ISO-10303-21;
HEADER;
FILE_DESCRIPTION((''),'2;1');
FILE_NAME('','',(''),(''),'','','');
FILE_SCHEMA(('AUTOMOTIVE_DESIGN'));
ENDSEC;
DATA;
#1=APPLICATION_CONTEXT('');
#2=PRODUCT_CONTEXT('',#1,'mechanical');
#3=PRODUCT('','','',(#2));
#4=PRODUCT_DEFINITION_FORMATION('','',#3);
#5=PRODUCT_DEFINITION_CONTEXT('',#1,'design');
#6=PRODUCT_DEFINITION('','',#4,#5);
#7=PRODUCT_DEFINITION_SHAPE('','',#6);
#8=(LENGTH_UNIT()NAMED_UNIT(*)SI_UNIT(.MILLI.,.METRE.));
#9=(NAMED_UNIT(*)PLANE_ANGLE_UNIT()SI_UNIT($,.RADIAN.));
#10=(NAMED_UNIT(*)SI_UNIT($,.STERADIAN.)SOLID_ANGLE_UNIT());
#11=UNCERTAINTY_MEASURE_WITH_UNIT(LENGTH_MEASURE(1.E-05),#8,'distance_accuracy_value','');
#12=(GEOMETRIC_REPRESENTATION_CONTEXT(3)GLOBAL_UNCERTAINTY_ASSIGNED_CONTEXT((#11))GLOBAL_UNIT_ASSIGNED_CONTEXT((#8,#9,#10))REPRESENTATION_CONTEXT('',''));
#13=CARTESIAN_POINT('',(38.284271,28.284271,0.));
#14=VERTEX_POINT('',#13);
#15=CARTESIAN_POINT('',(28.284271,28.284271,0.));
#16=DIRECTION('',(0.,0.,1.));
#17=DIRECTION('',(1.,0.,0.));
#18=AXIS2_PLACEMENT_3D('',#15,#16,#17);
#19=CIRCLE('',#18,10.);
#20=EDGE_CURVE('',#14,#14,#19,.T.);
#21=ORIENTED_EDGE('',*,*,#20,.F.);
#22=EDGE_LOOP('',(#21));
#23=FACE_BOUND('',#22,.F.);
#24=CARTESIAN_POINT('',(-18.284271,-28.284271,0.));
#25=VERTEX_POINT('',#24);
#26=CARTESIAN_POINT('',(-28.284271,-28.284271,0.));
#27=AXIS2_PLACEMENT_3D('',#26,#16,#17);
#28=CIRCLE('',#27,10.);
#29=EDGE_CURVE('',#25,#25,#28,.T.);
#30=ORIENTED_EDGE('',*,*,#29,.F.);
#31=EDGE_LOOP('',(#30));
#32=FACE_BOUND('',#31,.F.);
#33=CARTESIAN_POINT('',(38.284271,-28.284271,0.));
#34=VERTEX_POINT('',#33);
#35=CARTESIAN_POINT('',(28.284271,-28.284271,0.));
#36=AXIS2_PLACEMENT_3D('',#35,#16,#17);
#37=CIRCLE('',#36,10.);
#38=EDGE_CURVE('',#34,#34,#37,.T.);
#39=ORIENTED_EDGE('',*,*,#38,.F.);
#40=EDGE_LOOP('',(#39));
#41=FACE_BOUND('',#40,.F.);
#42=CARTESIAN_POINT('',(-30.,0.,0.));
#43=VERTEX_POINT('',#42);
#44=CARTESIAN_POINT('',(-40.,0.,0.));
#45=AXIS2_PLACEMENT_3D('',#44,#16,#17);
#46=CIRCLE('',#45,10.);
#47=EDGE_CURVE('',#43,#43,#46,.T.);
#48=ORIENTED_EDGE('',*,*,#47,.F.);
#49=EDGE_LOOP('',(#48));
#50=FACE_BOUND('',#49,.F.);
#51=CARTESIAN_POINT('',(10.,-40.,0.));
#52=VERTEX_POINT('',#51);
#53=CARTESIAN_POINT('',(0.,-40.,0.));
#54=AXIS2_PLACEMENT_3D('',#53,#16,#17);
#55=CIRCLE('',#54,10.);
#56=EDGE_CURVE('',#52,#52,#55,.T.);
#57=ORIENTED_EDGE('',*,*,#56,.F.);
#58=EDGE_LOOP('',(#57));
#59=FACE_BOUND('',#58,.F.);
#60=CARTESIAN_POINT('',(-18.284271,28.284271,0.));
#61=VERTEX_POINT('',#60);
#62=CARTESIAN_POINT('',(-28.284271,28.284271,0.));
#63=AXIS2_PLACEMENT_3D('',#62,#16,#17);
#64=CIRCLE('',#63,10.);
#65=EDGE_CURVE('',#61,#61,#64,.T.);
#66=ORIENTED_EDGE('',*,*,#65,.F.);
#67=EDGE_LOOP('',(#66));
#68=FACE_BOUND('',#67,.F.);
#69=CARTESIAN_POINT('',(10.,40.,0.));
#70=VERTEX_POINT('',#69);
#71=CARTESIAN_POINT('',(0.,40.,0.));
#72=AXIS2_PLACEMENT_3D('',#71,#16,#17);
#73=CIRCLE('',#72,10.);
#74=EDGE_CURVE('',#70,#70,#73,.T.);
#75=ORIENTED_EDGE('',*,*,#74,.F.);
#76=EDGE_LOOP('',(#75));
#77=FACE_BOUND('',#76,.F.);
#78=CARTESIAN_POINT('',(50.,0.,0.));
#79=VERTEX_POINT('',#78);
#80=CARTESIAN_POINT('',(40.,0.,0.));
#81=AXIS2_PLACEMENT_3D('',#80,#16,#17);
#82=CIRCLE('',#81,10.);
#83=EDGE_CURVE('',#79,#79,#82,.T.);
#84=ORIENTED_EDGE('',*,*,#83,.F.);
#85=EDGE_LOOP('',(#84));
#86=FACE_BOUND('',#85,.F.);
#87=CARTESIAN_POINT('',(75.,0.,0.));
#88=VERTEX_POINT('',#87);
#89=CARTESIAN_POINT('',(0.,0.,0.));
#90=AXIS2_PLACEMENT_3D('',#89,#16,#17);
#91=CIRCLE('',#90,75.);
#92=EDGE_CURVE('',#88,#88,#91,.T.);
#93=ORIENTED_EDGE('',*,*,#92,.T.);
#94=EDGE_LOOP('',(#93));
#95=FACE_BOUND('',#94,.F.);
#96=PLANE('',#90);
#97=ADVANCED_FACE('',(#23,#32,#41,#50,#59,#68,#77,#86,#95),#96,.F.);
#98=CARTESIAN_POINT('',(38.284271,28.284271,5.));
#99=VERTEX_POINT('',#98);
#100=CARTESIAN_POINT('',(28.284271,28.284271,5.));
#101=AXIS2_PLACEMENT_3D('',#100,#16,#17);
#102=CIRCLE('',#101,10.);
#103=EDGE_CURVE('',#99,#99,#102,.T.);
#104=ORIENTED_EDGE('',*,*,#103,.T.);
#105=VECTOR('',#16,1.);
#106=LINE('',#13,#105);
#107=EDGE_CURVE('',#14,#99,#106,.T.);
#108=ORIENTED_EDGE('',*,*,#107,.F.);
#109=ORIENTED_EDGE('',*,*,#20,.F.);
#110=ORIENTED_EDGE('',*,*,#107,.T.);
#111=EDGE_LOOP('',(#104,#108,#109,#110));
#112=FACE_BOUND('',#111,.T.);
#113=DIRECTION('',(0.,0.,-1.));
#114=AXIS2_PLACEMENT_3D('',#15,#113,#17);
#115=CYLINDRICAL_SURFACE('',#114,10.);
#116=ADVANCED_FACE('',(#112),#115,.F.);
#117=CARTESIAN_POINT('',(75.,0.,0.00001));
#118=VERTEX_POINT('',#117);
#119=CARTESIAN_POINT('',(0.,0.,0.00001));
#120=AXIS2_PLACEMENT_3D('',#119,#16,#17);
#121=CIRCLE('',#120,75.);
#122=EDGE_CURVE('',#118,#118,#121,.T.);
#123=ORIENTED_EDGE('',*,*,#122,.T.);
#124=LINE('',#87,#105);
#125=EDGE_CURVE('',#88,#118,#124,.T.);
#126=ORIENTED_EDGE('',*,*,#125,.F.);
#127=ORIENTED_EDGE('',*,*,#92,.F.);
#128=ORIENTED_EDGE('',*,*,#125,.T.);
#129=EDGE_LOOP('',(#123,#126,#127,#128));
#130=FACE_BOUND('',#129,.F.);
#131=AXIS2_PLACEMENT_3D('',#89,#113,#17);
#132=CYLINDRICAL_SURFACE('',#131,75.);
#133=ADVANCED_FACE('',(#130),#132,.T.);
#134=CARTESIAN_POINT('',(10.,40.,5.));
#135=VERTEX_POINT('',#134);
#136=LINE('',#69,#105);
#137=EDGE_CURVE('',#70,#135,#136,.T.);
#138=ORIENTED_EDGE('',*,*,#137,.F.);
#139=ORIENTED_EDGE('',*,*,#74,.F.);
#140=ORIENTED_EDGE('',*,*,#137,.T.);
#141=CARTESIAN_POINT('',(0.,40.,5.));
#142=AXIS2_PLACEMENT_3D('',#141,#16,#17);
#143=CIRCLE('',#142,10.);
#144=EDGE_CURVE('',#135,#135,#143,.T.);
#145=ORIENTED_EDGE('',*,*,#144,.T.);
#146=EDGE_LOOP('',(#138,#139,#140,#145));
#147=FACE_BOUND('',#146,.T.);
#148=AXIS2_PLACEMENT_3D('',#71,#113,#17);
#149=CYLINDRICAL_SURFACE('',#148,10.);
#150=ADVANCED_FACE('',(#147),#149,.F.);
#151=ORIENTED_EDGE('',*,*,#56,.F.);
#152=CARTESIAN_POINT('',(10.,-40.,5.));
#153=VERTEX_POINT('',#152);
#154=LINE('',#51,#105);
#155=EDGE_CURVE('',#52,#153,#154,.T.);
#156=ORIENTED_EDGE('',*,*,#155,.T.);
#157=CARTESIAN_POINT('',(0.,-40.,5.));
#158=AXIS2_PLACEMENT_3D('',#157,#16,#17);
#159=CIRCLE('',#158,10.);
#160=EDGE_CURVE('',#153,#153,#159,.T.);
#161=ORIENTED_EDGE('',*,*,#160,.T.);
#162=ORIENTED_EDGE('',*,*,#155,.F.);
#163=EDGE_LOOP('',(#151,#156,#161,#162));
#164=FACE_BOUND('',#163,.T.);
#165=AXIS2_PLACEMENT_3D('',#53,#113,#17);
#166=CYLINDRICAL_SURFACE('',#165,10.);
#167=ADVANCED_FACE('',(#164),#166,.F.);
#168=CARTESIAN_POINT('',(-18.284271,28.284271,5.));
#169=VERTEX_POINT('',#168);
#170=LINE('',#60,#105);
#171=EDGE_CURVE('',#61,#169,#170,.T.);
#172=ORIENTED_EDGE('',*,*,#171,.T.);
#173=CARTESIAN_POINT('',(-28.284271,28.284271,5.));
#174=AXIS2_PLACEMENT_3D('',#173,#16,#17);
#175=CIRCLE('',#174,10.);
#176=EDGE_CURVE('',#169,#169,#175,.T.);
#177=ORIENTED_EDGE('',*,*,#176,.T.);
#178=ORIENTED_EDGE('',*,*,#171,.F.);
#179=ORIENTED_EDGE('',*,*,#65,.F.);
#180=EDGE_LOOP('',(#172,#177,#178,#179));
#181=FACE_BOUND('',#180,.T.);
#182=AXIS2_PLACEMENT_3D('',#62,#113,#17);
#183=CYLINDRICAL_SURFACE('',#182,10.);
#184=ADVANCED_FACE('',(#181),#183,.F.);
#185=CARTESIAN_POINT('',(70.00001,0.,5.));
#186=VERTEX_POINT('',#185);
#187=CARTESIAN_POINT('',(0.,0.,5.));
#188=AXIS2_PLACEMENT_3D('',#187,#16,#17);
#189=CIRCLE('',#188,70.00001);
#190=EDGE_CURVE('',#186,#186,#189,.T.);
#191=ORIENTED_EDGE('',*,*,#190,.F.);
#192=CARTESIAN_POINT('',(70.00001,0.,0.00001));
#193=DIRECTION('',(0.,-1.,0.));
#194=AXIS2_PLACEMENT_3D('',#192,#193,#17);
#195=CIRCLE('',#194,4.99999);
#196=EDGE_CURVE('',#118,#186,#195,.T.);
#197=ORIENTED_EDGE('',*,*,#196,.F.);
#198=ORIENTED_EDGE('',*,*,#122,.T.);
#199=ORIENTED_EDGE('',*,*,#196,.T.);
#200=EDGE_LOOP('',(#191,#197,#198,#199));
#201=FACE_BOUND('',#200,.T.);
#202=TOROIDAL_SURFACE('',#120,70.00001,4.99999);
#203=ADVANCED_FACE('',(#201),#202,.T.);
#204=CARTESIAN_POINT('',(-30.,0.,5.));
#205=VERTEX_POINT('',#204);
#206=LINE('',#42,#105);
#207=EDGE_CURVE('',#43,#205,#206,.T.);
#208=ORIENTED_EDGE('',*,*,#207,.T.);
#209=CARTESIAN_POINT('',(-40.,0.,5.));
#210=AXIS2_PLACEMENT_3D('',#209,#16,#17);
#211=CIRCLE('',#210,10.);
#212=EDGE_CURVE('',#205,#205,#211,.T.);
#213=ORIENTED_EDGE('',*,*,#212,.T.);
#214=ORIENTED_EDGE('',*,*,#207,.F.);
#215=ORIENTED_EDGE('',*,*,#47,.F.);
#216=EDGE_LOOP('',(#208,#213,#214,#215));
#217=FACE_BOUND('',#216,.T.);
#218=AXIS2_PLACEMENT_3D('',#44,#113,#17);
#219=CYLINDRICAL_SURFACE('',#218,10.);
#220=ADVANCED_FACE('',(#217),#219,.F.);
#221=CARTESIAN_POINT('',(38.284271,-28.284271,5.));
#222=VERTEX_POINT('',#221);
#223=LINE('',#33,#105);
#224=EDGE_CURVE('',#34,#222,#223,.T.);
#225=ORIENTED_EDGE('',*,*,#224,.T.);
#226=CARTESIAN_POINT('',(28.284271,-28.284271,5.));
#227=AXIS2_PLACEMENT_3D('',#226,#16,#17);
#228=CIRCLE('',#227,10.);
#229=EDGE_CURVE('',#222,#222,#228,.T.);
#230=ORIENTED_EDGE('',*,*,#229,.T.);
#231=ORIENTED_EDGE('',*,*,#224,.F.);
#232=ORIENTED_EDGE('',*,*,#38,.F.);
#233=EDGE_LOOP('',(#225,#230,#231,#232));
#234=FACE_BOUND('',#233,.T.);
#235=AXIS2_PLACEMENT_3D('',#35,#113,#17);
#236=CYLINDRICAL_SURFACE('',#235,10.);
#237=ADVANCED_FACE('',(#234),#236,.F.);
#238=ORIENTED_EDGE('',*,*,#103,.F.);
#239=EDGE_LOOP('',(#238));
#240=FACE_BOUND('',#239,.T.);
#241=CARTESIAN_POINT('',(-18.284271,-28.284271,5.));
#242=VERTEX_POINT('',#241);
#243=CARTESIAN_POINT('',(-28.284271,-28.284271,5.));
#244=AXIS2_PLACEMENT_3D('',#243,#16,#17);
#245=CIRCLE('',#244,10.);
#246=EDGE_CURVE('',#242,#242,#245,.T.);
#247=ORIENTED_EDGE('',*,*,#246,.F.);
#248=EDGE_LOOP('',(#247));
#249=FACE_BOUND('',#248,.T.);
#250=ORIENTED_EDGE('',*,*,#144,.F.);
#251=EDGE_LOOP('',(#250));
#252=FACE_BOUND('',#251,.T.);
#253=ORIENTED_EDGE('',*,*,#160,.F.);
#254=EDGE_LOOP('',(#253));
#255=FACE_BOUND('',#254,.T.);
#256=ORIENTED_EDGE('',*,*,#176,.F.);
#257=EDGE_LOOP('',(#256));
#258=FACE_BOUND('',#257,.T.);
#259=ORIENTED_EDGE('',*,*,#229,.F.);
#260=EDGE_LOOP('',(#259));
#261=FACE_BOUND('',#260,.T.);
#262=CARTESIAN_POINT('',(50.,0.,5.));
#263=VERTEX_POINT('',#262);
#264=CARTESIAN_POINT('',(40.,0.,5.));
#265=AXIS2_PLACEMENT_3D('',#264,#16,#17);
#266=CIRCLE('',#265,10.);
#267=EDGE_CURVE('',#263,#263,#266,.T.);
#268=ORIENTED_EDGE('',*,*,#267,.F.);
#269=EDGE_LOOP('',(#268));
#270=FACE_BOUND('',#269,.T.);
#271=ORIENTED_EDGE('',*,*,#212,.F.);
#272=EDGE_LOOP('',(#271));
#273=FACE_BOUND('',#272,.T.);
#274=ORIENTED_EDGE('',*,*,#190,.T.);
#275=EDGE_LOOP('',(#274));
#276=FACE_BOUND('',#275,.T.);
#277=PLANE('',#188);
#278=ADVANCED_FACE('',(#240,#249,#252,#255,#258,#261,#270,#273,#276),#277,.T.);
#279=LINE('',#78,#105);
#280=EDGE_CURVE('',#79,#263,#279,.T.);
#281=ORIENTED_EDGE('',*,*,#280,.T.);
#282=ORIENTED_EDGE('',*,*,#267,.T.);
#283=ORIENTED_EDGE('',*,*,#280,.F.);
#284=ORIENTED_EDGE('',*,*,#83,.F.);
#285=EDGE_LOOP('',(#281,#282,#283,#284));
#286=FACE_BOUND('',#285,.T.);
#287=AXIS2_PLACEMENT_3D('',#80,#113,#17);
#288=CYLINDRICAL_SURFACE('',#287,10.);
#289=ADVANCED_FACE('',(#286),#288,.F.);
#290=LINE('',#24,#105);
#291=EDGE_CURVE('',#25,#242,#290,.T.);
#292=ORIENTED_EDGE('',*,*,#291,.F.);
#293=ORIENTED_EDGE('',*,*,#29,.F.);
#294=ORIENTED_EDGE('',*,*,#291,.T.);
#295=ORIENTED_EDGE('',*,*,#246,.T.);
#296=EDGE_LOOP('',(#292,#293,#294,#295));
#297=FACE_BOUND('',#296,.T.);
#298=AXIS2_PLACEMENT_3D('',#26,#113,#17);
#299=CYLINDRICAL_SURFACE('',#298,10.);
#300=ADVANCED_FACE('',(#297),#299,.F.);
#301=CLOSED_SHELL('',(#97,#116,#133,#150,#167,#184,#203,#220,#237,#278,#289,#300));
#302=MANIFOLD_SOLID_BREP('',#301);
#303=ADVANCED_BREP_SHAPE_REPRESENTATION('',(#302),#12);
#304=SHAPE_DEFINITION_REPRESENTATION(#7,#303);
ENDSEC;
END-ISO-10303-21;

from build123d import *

# Parameters (mm, degrees)
F0_R     = 75
F2_DEPTH = 5
F3_R     = 4.99999
F1_R     = 10
F5_DEPTH = 5


# Not quite as in the source:
# - a fillet or chamfer is up to 0.001 mm smaller than in the source, because OpenCascade refuses the exact size
# - the program builds the solid bodies; features that only make, move or delete a surface that nothing else refers to are left out


with BuildPart() as f2:
    # F0 (on Top) → F2 (new body)
    with BuildSketch(Plane.XY):
        Circle(F0_R)
    extrude(amount=F2_DEPTH)

    # F3 (radius 5 in the source; OpenCascade refuses exactly that, so slightly less here)
    f3_edges = [f2.edges().sort_by_distance(p)[0] for p in [
        (-75, 0, 5),
    ]]
    fillet(f3_edges, radius=F3_R)

    # F1 (on face) → F5 (cut, through all)
    with BuildSketch(Plane.XY):
        with Locations((0, -40)):
            Circle(F1_R)
        with Locations((28.2842712475, -28.2842712475)):
            Circle(F1_R)
        with Locations((-28.2842712475, -28.2842712475)):
            Circle(F1_R)
        with Locations((-40, 0)):
            Circle(F1_R)
        with Locations((-28.2842712475, 28.2842712475)):
            Circle(F1_R)
        with Locations((0, 40)):
            Circle(F1_R)
        with Locations((28.2842712475, 28.2842712475)):
            Circle(F1_R)
        with Locations((40, 0)):
            Circle(F1_R)
    extrude(amount=F5_DEPTH, mode=Mode.SUBTRACT)


solid = f2.part
